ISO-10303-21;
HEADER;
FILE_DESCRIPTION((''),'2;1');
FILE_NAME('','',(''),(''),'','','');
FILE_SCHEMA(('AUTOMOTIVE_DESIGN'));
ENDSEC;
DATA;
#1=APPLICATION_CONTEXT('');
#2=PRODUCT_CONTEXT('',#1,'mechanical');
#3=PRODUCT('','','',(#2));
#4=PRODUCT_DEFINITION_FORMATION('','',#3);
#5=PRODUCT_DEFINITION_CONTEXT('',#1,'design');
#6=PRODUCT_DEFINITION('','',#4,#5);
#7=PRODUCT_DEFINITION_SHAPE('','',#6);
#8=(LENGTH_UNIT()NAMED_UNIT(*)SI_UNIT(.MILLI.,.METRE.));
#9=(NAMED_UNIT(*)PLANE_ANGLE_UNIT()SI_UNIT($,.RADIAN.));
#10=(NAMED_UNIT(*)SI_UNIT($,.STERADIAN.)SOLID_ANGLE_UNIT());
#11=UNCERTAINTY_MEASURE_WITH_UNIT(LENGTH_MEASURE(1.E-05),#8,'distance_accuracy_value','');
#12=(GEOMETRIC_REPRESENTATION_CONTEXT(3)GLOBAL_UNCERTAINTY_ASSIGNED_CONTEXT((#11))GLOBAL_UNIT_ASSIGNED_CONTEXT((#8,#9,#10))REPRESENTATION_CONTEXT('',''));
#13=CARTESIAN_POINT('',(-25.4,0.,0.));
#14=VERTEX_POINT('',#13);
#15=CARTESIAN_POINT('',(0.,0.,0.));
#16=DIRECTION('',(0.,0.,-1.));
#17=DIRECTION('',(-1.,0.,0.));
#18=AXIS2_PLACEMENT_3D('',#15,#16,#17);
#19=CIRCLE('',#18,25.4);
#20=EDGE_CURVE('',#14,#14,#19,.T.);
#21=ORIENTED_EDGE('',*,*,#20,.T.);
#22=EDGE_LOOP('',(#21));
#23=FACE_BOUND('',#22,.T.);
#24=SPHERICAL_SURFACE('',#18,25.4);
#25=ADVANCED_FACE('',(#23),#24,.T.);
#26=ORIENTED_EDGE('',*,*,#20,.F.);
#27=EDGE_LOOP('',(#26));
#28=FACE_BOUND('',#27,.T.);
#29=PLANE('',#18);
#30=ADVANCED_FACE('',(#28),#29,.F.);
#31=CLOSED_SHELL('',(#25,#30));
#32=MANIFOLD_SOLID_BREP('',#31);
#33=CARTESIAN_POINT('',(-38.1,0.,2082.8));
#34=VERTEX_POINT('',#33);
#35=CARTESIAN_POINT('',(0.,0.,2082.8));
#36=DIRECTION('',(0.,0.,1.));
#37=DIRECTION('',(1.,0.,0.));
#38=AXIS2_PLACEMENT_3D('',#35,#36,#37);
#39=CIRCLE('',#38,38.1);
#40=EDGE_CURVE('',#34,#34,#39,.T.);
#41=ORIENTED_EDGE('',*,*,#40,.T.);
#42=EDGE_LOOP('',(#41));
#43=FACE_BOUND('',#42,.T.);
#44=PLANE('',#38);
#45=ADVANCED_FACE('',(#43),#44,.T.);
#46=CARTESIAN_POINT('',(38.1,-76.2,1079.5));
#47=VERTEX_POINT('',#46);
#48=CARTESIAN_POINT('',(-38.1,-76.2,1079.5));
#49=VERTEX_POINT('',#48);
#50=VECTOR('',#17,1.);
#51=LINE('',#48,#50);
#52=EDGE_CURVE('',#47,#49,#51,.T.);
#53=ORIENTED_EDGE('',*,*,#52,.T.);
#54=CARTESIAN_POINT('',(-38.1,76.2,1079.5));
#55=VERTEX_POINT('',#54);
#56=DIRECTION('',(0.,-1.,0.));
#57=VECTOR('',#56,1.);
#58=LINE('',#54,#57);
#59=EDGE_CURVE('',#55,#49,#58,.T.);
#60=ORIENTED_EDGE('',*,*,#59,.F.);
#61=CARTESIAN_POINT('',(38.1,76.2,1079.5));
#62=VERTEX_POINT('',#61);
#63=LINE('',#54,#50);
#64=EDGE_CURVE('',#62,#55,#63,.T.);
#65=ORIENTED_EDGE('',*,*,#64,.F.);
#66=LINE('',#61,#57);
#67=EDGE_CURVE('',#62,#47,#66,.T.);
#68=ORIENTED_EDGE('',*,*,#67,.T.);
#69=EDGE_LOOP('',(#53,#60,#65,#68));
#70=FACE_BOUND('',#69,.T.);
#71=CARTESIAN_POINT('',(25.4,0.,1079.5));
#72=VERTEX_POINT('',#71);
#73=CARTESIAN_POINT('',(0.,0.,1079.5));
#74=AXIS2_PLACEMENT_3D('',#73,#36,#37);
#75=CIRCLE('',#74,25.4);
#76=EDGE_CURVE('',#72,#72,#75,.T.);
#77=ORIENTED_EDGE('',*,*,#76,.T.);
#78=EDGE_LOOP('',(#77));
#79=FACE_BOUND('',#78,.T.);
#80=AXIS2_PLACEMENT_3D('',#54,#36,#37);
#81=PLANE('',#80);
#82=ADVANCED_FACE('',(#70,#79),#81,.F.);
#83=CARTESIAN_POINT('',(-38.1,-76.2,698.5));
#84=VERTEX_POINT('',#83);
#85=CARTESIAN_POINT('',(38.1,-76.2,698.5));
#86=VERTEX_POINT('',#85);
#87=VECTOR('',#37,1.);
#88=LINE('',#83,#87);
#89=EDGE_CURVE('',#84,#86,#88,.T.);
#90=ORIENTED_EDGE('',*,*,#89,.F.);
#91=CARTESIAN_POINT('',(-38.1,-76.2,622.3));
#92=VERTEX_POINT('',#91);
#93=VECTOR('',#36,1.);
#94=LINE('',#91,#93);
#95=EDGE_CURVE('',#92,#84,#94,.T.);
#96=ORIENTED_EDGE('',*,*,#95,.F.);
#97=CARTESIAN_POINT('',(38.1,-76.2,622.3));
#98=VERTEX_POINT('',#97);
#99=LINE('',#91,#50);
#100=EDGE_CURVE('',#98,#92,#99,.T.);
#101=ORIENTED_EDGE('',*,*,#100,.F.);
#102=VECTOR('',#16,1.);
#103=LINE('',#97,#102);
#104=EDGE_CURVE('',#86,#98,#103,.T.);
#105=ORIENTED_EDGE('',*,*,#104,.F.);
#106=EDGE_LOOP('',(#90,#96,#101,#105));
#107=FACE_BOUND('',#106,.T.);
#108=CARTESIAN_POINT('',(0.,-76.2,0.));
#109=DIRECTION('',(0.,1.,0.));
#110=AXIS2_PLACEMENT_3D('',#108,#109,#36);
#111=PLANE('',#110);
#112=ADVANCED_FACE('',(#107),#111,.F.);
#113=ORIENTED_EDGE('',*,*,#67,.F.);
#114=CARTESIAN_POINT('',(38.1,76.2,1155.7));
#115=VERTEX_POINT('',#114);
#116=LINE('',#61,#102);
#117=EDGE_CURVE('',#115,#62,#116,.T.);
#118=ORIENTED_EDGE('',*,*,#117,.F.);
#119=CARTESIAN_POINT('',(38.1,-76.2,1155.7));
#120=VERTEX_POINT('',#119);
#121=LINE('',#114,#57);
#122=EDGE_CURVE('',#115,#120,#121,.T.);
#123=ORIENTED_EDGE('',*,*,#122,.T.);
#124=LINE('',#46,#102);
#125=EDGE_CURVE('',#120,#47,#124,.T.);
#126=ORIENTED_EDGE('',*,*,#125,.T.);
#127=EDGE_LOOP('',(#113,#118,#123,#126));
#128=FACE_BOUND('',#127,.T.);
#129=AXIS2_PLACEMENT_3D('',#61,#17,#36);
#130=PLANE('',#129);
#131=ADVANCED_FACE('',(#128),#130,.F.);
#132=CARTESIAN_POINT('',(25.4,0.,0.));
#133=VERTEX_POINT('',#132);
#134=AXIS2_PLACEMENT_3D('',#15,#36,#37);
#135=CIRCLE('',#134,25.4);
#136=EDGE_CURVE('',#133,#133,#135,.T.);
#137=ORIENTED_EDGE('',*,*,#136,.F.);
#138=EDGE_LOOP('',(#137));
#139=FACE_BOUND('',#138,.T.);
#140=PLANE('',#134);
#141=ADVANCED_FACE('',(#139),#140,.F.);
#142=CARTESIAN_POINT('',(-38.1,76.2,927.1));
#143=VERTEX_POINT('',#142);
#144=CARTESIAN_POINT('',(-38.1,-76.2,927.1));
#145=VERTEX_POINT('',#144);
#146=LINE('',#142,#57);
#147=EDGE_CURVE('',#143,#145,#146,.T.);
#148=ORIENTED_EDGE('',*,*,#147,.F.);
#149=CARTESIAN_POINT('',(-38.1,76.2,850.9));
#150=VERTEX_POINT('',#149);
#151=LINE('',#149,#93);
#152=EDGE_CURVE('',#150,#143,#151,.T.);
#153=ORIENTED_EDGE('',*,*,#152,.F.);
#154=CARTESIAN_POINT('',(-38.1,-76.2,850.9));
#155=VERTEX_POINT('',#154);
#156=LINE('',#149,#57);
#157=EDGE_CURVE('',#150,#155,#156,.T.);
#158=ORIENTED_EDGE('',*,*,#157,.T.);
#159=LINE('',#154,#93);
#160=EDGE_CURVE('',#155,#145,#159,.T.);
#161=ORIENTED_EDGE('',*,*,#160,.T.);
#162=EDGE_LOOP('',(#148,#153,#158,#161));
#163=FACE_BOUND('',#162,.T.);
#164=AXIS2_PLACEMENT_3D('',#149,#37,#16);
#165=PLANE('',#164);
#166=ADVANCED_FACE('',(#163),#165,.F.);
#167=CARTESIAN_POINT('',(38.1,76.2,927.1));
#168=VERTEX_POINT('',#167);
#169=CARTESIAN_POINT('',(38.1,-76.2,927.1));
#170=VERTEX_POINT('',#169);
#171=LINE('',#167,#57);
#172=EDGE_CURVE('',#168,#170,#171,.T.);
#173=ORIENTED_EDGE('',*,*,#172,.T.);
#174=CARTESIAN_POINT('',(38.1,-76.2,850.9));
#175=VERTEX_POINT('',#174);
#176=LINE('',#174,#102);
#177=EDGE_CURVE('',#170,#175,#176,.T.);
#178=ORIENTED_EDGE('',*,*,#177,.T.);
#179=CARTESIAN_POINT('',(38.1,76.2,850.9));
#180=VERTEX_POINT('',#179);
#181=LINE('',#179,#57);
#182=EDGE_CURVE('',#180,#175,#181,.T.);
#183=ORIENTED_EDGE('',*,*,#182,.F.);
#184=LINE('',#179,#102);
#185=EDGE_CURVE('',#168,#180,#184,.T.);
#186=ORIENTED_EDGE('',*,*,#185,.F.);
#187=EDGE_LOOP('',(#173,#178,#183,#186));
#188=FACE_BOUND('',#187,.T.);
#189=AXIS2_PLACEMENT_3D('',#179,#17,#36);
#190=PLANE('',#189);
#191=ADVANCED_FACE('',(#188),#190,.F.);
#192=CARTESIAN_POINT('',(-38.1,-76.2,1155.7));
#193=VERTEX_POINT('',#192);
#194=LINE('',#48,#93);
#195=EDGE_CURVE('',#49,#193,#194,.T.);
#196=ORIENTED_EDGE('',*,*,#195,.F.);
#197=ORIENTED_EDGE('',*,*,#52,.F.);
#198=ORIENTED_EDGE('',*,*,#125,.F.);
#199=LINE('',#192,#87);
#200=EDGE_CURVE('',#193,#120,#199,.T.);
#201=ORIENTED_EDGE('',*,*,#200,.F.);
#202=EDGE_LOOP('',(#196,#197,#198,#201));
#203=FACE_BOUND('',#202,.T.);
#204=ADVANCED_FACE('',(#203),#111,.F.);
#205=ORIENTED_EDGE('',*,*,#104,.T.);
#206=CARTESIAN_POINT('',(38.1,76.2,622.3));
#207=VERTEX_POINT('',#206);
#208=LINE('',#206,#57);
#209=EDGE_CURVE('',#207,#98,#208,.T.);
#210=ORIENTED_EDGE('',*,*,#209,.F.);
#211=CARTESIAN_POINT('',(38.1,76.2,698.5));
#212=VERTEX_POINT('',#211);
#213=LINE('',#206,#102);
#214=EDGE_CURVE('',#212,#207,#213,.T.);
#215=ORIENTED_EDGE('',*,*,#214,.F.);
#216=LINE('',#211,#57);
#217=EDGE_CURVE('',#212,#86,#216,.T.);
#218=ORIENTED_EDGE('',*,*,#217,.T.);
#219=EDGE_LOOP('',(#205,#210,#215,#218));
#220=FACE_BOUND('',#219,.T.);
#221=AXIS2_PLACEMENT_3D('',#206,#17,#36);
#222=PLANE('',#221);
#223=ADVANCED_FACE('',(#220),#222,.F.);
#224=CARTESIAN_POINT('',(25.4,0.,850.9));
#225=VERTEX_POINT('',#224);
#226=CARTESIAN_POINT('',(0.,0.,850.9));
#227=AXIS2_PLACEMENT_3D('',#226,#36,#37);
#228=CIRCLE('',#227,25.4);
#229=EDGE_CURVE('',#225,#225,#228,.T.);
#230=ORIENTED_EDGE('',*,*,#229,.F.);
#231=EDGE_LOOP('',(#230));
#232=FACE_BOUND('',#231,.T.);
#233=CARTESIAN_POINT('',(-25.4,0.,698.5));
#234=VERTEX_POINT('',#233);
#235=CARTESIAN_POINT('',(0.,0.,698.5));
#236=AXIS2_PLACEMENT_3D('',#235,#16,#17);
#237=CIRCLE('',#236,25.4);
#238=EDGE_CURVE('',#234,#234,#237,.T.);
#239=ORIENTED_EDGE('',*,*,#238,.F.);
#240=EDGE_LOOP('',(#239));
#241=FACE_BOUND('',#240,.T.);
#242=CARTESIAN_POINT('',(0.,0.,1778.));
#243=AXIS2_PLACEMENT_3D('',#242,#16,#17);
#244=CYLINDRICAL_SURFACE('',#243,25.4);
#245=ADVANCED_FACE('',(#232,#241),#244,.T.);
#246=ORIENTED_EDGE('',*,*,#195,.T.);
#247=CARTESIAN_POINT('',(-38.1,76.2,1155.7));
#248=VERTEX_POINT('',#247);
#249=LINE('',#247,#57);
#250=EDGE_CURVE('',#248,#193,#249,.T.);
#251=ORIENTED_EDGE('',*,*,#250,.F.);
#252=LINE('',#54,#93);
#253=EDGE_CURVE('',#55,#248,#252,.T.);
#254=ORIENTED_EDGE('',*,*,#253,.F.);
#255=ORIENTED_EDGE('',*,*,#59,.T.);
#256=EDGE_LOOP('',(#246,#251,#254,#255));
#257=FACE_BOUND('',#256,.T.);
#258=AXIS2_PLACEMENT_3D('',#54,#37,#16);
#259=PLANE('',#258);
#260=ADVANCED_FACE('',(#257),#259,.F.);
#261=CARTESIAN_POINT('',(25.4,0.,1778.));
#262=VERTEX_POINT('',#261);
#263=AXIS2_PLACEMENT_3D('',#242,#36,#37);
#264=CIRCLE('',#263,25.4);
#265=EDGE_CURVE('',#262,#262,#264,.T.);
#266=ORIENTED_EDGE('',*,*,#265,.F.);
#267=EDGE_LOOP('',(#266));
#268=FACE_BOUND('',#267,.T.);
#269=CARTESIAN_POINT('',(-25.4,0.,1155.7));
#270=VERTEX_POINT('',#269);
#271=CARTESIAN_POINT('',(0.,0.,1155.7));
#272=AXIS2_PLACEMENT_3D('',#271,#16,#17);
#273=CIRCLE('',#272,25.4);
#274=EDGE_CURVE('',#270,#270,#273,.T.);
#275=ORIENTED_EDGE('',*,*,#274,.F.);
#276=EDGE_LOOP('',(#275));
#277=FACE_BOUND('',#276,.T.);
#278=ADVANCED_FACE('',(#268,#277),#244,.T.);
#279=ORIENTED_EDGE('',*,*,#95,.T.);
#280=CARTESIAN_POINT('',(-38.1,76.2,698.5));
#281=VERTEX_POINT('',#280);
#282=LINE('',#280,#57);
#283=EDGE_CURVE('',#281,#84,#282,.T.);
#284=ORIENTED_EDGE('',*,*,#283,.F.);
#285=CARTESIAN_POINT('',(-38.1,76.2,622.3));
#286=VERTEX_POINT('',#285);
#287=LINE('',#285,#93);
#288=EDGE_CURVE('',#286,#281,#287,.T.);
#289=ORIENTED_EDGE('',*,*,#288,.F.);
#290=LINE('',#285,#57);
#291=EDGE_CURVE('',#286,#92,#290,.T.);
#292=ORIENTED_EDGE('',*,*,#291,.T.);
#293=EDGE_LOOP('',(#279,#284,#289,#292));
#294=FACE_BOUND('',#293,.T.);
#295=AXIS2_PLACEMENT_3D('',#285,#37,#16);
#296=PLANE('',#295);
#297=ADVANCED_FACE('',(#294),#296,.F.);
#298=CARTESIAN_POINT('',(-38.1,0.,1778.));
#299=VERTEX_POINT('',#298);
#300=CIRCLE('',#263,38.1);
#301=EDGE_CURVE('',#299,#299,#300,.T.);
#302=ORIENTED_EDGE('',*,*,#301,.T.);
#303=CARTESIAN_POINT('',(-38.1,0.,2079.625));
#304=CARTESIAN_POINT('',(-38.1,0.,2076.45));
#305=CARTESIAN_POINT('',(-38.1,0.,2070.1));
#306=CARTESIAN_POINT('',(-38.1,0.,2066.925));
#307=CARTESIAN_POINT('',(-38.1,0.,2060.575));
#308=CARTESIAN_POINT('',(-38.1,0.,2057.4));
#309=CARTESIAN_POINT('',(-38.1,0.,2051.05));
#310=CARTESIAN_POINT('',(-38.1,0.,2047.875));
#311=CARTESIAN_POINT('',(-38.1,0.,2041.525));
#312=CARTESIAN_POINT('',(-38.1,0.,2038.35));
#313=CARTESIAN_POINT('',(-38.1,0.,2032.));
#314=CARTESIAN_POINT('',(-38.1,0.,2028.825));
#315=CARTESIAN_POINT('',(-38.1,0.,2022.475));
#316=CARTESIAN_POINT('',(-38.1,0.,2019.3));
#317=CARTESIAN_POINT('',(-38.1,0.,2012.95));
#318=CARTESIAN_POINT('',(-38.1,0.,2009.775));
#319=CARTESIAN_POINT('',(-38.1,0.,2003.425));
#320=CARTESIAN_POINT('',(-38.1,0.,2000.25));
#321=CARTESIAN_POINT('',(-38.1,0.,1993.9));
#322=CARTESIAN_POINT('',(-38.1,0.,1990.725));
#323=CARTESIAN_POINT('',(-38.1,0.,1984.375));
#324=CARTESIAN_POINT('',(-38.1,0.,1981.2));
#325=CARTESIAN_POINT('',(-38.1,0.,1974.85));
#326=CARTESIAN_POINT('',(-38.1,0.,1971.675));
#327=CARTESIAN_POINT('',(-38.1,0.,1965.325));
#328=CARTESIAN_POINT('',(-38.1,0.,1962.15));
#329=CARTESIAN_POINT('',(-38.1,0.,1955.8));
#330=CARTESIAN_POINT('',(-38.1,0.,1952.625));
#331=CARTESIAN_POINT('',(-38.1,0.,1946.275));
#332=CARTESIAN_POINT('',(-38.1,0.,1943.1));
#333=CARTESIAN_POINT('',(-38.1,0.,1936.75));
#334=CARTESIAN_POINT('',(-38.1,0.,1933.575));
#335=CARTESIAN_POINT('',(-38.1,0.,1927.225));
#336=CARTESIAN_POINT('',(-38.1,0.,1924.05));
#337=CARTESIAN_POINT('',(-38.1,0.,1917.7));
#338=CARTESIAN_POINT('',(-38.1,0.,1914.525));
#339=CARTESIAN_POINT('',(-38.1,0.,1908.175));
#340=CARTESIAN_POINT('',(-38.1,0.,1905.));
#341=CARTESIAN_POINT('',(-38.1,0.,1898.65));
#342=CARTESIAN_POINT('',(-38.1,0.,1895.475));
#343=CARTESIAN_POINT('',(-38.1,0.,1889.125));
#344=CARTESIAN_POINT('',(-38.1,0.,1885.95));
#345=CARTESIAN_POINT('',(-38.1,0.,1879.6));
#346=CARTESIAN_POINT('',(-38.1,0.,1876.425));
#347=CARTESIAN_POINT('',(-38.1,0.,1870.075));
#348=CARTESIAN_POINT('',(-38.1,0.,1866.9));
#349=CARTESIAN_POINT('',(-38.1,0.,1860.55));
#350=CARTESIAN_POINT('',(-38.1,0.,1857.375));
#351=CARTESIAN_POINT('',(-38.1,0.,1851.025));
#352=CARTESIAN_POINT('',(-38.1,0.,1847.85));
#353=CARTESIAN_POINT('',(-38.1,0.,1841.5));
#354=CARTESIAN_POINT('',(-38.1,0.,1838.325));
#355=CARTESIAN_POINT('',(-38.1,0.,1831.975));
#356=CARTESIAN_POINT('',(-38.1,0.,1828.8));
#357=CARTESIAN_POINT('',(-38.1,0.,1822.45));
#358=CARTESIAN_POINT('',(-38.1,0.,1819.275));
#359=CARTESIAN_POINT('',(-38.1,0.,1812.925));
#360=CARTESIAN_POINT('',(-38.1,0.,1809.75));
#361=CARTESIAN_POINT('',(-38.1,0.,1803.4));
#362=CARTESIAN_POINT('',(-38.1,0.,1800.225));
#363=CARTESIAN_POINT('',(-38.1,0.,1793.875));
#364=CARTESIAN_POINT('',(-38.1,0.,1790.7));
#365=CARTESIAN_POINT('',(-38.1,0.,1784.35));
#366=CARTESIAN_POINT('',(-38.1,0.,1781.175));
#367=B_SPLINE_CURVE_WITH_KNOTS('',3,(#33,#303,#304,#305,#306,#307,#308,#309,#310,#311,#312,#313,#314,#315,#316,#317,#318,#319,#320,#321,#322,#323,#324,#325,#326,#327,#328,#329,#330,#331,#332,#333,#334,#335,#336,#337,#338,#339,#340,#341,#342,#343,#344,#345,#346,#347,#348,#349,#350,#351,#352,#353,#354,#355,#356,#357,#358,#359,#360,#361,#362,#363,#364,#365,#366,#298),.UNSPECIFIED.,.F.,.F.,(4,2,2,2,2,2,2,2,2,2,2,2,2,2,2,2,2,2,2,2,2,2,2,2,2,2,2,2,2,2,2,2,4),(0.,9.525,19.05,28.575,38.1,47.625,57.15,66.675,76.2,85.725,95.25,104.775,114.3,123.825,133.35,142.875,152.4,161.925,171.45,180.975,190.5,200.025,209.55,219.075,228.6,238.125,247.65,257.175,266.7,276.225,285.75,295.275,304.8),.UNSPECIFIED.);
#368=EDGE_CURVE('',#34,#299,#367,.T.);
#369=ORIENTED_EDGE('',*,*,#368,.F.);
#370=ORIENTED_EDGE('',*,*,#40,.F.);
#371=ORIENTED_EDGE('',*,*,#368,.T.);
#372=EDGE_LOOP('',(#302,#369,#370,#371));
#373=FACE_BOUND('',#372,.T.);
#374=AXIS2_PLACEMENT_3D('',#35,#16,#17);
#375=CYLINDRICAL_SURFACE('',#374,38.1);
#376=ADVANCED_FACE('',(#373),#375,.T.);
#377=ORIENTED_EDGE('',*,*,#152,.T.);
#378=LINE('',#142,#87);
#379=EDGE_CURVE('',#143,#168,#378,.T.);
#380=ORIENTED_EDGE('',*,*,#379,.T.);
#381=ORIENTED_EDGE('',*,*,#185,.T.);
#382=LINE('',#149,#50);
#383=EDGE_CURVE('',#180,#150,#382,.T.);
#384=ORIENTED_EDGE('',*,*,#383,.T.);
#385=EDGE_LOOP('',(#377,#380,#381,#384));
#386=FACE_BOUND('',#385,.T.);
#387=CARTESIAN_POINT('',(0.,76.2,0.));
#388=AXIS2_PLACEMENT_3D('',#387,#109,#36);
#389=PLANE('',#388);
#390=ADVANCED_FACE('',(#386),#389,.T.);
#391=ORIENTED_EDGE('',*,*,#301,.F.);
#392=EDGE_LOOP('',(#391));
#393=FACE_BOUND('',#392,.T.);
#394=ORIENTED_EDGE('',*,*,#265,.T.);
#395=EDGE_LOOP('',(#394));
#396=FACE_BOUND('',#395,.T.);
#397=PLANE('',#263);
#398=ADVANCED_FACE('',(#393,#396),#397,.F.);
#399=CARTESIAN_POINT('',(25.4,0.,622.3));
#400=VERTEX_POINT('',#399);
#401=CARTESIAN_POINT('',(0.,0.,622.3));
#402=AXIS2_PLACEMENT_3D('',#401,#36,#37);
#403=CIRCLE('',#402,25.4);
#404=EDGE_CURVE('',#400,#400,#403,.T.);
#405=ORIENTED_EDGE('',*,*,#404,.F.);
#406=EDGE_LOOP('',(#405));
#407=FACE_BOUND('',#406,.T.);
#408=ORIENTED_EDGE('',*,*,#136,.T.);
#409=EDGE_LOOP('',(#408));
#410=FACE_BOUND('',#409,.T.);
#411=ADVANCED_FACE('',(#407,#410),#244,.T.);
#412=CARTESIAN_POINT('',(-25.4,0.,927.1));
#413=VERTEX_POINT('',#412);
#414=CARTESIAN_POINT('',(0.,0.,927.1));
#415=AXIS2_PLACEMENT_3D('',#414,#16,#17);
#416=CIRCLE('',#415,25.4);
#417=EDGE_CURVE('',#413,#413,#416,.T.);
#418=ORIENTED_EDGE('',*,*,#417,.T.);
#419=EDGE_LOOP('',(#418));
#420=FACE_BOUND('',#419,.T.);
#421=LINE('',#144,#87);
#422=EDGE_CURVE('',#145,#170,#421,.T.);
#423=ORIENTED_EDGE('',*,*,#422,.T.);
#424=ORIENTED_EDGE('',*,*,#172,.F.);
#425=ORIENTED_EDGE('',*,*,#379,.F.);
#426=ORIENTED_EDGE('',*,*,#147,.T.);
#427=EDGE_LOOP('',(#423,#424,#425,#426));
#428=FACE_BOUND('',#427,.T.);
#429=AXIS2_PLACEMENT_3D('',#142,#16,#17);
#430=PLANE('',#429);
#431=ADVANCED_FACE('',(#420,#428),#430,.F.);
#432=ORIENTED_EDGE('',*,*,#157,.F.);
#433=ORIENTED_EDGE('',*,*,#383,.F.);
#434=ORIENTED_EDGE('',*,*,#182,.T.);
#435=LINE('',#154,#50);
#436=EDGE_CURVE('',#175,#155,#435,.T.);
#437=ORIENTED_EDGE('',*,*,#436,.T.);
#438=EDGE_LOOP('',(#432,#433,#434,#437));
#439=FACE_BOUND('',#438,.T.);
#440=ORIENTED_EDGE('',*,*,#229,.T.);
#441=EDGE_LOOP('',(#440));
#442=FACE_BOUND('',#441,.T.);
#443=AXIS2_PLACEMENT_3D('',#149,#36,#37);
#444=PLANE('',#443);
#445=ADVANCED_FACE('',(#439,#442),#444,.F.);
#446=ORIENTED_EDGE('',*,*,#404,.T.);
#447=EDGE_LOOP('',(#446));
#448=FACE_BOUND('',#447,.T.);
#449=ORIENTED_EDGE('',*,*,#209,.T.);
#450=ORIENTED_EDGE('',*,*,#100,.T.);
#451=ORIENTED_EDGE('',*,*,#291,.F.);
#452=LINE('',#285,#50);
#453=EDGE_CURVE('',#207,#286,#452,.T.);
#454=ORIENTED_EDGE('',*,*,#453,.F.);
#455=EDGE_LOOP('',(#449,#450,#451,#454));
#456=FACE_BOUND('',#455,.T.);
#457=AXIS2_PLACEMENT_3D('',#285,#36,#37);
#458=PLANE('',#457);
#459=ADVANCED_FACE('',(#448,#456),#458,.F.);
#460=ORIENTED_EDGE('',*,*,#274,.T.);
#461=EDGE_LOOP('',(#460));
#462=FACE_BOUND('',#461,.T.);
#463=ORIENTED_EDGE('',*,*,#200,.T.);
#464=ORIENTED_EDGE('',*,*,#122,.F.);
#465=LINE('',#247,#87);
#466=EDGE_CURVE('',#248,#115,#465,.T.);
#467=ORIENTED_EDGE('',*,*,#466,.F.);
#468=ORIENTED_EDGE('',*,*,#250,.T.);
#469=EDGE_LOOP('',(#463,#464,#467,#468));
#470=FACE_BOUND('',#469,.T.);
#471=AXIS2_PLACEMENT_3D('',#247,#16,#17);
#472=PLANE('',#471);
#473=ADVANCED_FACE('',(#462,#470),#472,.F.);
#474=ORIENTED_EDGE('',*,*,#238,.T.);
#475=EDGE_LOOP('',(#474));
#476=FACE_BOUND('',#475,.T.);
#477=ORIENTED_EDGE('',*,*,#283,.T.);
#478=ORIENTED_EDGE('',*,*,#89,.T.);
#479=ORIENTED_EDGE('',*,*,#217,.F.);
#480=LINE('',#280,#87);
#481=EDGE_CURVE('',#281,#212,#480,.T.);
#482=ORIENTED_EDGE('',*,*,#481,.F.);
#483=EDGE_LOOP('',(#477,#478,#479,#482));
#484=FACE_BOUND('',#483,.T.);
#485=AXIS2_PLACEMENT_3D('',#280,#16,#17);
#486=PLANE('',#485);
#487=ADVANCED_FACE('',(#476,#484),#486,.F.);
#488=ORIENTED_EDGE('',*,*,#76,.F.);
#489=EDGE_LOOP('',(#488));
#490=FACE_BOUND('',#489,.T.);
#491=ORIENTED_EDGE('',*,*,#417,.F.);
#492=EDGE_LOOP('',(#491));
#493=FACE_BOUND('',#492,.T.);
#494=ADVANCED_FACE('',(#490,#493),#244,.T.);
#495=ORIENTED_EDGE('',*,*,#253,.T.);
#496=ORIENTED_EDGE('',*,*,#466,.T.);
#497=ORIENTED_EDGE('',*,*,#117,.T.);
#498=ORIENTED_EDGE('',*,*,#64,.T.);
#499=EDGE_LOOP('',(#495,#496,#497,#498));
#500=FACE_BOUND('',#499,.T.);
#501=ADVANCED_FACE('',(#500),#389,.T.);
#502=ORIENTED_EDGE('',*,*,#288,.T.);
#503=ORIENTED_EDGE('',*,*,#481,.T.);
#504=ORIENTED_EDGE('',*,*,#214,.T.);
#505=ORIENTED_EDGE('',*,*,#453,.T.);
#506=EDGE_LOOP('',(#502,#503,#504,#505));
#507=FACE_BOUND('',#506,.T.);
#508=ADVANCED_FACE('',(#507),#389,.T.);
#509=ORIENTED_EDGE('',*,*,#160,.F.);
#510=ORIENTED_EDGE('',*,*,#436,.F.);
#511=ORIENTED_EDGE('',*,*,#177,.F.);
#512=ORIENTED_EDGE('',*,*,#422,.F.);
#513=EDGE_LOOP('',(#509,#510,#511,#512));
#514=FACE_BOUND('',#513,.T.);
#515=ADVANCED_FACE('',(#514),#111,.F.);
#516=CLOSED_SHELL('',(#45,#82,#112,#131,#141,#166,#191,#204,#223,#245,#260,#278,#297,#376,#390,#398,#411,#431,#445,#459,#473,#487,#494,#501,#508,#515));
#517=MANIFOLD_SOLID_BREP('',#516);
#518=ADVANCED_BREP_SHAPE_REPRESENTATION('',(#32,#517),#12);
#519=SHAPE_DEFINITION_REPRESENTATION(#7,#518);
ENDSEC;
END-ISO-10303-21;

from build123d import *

# Parameters (mm, degrees)
SKETCH1_R           = 25.4
BOSS_EXTRUDE1_DEPTH = 1778
SKETCH2_R           = 38.1
BOSS_EXTRUDE2_DEPTH = 304.8
SKETCH4_W           = 76.2
SKETCH4_H           = 76.2
BOSS_EXTRUDE4_DEPTH = 76.2
SKETCH5_R           = 25.4
BOSS_EXTRUDE5_DEPTH = 25.4
FILLET1_R           = 25.4


with BuildPart() as part:
    # Sketch1 → Boss-Extrude1 (new body)
    with BuildSketch(Plane.XY):
        Circle(SKETCH1_R)
    extrude(amount=BOSS_EXTRUDE1_DEPTH)

    # Sketch2 → Boss-Extrude2 (add)
    with BuildSketch(Plane.XY.offset(1778)):
        with Locations(Location((0, 0, 0), (0, 0, 180))):
            Circle(SKETCH2_R)
    extrude(amount=BOSS_EXTRUDE2_DEPTH)

    # Sketch4 → Boss-Extrude4 (add, symmetric)
    with BuildSketch(Plane(origin=(0, 0, 0), x_dir=(1, 0, 0), z_dir=(0, 1, 0))):
        with Locations((0, -889)):
            Rectangle(SKETCH4_W, SKETCH4_H)
        with Locations((0, -1117.6)):
            Rectangle(SKETCH4_W, SKETCH4_H)
        with Locations((0, -660.4)):
            Rectangle(SKETCH4_W, SKETCH4_H)
    extrude(amount=BOSS_EXTRUDE4_DEPTH, both=True)


with BuildPart() as body_2:
    # Sketch5 → Boss-Extrude5 (new body)
    with BuildSketch(Plane(origin=(0, 0, 0), x_dir=(-1, 0, 0), z_dir=(0, 0, -1))):
        Circle(SKETCH5_R)
    extrude(amount=BOSS_EXTRUDE5_DEPTH)

    # Fillet1
    fillet1_edges = [body_2.edges().sort_by_distance(p)[0] for p in [
        (25.4, 0, -25.4),
    ]]
    fillet(fillet1_edges, radius=FILLET1_R - 0.0001)  # a hair under: the kernel refuses the full size


solid = Compound([part.part, body_2.part])
